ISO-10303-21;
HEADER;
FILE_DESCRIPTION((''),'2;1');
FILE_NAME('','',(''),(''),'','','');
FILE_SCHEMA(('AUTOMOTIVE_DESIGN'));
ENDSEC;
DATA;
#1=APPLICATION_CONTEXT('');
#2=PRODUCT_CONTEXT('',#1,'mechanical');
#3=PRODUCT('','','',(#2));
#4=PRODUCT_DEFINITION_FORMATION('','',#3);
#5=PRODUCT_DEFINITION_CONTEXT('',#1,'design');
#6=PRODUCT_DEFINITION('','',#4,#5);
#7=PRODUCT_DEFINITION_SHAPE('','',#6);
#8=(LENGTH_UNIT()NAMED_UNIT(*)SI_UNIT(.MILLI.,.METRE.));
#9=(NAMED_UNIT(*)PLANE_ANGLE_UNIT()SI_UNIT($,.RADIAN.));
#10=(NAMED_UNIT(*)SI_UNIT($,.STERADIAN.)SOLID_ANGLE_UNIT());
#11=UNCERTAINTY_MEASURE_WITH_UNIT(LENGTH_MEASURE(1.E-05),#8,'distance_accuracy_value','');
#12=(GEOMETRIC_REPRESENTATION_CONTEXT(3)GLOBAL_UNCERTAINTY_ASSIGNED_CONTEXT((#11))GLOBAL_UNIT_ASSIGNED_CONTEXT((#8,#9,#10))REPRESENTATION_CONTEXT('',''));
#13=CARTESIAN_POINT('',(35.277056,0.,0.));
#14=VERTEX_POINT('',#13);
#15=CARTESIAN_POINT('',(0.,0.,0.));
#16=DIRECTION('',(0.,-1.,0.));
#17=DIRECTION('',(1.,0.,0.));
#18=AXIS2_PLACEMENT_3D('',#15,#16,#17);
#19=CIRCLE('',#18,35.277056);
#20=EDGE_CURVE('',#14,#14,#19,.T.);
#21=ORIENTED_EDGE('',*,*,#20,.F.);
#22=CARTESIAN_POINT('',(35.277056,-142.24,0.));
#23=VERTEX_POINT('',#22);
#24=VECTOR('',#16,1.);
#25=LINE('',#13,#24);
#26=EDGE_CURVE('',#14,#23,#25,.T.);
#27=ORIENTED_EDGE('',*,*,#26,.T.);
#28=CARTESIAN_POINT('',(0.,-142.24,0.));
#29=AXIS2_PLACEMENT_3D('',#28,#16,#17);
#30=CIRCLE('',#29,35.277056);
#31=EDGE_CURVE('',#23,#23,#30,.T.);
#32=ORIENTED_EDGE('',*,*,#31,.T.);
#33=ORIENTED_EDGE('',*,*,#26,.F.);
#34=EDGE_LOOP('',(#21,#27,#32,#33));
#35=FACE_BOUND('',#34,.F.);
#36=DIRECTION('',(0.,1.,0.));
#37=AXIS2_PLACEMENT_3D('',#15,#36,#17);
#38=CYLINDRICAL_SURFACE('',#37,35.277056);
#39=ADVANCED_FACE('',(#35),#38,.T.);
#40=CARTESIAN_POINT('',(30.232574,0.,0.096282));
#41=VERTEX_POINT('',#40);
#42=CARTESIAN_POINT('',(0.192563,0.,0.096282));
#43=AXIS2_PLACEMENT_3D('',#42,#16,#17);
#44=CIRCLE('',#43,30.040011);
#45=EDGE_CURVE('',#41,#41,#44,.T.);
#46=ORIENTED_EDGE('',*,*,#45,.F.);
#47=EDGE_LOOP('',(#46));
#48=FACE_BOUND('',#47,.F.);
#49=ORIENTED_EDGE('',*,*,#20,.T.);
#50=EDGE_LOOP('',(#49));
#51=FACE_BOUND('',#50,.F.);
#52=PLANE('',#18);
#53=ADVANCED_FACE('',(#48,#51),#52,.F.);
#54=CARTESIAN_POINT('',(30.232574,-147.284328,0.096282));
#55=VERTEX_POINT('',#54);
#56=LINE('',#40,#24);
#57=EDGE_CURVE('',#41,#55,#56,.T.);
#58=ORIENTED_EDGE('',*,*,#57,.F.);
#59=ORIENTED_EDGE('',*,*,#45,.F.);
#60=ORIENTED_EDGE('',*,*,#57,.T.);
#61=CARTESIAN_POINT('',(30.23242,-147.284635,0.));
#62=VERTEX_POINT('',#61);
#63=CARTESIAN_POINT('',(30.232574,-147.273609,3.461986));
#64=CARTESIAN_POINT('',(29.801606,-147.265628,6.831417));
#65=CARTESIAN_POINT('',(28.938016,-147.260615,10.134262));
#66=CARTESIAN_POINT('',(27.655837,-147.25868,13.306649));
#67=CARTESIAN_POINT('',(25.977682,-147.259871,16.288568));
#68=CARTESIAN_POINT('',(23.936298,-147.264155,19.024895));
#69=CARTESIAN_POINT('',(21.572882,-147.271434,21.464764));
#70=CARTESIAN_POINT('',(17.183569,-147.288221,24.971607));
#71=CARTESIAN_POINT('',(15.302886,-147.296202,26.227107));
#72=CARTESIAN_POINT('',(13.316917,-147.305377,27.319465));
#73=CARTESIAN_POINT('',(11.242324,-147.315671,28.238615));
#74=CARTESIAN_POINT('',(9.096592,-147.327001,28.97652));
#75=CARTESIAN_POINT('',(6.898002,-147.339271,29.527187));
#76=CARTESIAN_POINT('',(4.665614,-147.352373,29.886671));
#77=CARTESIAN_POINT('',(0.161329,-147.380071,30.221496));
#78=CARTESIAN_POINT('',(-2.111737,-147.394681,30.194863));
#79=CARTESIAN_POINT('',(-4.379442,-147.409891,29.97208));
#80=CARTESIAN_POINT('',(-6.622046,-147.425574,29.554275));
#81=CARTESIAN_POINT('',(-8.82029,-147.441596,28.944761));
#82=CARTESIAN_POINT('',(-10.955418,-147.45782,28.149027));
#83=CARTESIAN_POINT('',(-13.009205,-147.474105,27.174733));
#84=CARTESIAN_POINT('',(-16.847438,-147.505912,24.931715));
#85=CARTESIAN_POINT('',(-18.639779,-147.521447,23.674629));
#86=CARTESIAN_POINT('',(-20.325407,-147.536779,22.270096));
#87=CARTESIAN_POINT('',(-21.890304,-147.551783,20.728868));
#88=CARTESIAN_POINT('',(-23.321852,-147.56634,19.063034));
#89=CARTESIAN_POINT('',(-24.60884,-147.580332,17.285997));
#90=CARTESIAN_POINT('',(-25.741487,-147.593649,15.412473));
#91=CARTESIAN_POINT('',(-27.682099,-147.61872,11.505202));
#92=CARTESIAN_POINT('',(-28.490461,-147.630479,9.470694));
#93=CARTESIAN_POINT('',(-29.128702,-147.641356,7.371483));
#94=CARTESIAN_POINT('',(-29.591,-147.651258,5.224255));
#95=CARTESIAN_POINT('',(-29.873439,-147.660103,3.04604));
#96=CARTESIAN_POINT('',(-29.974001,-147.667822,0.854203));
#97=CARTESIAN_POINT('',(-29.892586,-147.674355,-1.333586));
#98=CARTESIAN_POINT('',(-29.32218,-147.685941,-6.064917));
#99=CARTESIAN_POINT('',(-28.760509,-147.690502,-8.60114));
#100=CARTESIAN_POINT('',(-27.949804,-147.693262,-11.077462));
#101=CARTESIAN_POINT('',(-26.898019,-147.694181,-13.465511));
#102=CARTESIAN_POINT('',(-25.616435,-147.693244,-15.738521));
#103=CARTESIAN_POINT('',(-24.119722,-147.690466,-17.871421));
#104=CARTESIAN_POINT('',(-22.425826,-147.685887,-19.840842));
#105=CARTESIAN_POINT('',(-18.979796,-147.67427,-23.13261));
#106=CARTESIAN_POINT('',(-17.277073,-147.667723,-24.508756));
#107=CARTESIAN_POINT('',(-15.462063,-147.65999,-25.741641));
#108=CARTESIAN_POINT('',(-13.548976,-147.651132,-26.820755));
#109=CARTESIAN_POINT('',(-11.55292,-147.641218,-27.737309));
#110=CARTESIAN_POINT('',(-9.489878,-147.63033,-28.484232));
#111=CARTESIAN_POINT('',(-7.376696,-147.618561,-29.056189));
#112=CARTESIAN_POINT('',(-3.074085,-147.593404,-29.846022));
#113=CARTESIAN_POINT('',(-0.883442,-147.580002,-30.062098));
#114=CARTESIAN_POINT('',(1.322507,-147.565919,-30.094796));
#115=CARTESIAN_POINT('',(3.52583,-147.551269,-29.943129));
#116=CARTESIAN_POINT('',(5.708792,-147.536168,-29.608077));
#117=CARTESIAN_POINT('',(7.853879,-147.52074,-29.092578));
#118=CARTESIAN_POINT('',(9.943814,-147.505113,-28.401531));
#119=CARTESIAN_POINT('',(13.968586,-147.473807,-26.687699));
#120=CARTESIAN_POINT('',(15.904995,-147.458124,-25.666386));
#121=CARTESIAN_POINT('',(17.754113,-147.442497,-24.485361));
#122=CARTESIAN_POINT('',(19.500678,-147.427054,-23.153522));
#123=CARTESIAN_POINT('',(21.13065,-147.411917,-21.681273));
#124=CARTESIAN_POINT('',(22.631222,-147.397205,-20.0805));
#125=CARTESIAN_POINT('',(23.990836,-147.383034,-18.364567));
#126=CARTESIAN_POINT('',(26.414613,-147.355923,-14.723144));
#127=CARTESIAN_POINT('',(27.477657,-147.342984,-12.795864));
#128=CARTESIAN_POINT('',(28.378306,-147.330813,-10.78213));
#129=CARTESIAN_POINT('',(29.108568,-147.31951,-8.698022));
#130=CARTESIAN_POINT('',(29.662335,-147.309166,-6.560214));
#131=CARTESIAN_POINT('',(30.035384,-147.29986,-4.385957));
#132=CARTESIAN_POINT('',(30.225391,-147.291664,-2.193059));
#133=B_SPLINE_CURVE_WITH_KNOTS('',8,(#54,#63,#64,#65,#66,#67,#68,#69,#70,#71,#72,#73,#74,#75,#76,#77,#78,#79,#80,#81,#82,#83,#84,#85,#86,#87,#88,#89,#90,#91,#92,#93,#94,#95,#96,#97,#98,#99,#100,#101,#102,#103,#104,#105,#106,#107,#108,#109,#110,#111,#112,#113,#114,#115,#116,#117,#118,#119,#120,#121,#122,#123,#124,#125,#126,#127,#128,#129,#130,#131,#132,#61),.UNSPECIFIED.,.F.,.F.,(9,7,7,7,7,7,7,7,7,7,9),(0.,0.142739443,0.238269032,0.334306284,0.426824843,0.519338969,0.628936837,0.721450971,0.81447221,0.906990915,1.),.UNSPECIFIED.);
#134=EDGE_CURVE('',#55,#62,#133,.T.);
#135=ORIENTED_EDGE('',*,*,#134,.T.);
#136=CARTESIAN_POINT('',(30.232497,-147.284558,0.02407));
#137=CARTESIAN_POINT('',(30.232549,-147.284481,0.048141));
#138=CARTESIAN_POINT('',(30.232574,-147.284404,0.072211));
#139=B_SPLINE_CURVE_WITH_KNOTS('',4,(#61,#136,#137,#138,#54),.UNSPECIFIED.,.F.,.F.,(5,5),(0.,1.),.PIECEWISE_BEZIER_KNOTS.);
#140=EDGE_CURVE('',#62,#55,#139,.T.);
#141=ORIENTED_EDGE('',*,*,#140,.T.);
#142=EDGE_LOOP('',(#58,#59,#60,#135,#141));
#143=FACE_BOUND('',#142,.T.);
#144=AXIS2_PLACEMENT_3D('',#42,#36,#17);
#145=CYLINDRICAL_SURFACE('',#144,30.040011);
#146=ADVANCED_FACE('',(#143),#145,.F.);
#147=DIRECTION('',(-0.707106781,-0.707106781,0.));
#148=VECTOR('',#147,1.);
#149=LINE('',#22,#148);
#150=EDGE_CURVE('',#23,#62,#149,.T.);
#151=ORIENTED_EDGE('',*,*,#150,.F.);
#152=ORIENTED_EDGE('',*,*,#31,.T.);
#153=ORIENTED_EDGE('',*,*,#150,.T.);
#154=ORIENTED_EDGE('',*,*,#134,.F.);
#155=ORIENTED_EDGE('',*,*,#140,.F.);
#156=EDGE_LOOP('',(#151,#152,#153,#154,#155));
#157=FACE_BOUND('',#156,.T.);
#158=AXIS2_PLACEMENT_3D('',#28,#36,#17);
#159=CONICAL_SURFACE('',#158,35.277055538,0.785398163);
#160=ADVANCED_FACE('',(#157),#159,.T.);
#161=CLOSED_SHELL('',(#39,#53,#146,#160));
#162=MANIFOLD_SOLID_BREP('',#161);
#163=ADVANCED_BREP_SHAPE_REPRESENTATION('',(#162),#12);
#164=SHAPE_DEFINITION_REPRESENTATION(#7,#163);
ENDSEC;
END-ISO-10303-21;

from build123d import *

# Parameters (mm, degrees)
F0_R     = 35.2770555377
F0_R_2   = 30.0400114969
F1_DEPTH = 152.4


# Not quite as in the source:
# - a fillet or chamfer that OpenCascade refuses, or shapes differently, is made with other operations: its cross-section is extruded or revolved along the edge and cut away or added


with BuildPart() as f1:
    # F0 (on Front) → F1 (new body)
    with BuildSketch(Plane.XZ):
        Circle(F0_R)
        with Locations((0.1925629913, 0.0962815902)):
            Circle(F0_R_2, mode=Mode.SUBTRACT)
    extrude(amount=F1_DEPTH)

    # F2: chamfer of 10.16 on 1 edges, made by hand

    # F2_s1 → F2_t2 (revolve, cut)
    with BuildSketch(Plane.XY):
        Polygon((35.2770555377, -142.24), (25.1170555377, -152.4), (35.2770555377, -152.4), align=None)
    revolve(axis=Axis((0, -152.4, 0), (0, -1, 0)), mode=Mode.SUBTRACT)


solid = f1.part
